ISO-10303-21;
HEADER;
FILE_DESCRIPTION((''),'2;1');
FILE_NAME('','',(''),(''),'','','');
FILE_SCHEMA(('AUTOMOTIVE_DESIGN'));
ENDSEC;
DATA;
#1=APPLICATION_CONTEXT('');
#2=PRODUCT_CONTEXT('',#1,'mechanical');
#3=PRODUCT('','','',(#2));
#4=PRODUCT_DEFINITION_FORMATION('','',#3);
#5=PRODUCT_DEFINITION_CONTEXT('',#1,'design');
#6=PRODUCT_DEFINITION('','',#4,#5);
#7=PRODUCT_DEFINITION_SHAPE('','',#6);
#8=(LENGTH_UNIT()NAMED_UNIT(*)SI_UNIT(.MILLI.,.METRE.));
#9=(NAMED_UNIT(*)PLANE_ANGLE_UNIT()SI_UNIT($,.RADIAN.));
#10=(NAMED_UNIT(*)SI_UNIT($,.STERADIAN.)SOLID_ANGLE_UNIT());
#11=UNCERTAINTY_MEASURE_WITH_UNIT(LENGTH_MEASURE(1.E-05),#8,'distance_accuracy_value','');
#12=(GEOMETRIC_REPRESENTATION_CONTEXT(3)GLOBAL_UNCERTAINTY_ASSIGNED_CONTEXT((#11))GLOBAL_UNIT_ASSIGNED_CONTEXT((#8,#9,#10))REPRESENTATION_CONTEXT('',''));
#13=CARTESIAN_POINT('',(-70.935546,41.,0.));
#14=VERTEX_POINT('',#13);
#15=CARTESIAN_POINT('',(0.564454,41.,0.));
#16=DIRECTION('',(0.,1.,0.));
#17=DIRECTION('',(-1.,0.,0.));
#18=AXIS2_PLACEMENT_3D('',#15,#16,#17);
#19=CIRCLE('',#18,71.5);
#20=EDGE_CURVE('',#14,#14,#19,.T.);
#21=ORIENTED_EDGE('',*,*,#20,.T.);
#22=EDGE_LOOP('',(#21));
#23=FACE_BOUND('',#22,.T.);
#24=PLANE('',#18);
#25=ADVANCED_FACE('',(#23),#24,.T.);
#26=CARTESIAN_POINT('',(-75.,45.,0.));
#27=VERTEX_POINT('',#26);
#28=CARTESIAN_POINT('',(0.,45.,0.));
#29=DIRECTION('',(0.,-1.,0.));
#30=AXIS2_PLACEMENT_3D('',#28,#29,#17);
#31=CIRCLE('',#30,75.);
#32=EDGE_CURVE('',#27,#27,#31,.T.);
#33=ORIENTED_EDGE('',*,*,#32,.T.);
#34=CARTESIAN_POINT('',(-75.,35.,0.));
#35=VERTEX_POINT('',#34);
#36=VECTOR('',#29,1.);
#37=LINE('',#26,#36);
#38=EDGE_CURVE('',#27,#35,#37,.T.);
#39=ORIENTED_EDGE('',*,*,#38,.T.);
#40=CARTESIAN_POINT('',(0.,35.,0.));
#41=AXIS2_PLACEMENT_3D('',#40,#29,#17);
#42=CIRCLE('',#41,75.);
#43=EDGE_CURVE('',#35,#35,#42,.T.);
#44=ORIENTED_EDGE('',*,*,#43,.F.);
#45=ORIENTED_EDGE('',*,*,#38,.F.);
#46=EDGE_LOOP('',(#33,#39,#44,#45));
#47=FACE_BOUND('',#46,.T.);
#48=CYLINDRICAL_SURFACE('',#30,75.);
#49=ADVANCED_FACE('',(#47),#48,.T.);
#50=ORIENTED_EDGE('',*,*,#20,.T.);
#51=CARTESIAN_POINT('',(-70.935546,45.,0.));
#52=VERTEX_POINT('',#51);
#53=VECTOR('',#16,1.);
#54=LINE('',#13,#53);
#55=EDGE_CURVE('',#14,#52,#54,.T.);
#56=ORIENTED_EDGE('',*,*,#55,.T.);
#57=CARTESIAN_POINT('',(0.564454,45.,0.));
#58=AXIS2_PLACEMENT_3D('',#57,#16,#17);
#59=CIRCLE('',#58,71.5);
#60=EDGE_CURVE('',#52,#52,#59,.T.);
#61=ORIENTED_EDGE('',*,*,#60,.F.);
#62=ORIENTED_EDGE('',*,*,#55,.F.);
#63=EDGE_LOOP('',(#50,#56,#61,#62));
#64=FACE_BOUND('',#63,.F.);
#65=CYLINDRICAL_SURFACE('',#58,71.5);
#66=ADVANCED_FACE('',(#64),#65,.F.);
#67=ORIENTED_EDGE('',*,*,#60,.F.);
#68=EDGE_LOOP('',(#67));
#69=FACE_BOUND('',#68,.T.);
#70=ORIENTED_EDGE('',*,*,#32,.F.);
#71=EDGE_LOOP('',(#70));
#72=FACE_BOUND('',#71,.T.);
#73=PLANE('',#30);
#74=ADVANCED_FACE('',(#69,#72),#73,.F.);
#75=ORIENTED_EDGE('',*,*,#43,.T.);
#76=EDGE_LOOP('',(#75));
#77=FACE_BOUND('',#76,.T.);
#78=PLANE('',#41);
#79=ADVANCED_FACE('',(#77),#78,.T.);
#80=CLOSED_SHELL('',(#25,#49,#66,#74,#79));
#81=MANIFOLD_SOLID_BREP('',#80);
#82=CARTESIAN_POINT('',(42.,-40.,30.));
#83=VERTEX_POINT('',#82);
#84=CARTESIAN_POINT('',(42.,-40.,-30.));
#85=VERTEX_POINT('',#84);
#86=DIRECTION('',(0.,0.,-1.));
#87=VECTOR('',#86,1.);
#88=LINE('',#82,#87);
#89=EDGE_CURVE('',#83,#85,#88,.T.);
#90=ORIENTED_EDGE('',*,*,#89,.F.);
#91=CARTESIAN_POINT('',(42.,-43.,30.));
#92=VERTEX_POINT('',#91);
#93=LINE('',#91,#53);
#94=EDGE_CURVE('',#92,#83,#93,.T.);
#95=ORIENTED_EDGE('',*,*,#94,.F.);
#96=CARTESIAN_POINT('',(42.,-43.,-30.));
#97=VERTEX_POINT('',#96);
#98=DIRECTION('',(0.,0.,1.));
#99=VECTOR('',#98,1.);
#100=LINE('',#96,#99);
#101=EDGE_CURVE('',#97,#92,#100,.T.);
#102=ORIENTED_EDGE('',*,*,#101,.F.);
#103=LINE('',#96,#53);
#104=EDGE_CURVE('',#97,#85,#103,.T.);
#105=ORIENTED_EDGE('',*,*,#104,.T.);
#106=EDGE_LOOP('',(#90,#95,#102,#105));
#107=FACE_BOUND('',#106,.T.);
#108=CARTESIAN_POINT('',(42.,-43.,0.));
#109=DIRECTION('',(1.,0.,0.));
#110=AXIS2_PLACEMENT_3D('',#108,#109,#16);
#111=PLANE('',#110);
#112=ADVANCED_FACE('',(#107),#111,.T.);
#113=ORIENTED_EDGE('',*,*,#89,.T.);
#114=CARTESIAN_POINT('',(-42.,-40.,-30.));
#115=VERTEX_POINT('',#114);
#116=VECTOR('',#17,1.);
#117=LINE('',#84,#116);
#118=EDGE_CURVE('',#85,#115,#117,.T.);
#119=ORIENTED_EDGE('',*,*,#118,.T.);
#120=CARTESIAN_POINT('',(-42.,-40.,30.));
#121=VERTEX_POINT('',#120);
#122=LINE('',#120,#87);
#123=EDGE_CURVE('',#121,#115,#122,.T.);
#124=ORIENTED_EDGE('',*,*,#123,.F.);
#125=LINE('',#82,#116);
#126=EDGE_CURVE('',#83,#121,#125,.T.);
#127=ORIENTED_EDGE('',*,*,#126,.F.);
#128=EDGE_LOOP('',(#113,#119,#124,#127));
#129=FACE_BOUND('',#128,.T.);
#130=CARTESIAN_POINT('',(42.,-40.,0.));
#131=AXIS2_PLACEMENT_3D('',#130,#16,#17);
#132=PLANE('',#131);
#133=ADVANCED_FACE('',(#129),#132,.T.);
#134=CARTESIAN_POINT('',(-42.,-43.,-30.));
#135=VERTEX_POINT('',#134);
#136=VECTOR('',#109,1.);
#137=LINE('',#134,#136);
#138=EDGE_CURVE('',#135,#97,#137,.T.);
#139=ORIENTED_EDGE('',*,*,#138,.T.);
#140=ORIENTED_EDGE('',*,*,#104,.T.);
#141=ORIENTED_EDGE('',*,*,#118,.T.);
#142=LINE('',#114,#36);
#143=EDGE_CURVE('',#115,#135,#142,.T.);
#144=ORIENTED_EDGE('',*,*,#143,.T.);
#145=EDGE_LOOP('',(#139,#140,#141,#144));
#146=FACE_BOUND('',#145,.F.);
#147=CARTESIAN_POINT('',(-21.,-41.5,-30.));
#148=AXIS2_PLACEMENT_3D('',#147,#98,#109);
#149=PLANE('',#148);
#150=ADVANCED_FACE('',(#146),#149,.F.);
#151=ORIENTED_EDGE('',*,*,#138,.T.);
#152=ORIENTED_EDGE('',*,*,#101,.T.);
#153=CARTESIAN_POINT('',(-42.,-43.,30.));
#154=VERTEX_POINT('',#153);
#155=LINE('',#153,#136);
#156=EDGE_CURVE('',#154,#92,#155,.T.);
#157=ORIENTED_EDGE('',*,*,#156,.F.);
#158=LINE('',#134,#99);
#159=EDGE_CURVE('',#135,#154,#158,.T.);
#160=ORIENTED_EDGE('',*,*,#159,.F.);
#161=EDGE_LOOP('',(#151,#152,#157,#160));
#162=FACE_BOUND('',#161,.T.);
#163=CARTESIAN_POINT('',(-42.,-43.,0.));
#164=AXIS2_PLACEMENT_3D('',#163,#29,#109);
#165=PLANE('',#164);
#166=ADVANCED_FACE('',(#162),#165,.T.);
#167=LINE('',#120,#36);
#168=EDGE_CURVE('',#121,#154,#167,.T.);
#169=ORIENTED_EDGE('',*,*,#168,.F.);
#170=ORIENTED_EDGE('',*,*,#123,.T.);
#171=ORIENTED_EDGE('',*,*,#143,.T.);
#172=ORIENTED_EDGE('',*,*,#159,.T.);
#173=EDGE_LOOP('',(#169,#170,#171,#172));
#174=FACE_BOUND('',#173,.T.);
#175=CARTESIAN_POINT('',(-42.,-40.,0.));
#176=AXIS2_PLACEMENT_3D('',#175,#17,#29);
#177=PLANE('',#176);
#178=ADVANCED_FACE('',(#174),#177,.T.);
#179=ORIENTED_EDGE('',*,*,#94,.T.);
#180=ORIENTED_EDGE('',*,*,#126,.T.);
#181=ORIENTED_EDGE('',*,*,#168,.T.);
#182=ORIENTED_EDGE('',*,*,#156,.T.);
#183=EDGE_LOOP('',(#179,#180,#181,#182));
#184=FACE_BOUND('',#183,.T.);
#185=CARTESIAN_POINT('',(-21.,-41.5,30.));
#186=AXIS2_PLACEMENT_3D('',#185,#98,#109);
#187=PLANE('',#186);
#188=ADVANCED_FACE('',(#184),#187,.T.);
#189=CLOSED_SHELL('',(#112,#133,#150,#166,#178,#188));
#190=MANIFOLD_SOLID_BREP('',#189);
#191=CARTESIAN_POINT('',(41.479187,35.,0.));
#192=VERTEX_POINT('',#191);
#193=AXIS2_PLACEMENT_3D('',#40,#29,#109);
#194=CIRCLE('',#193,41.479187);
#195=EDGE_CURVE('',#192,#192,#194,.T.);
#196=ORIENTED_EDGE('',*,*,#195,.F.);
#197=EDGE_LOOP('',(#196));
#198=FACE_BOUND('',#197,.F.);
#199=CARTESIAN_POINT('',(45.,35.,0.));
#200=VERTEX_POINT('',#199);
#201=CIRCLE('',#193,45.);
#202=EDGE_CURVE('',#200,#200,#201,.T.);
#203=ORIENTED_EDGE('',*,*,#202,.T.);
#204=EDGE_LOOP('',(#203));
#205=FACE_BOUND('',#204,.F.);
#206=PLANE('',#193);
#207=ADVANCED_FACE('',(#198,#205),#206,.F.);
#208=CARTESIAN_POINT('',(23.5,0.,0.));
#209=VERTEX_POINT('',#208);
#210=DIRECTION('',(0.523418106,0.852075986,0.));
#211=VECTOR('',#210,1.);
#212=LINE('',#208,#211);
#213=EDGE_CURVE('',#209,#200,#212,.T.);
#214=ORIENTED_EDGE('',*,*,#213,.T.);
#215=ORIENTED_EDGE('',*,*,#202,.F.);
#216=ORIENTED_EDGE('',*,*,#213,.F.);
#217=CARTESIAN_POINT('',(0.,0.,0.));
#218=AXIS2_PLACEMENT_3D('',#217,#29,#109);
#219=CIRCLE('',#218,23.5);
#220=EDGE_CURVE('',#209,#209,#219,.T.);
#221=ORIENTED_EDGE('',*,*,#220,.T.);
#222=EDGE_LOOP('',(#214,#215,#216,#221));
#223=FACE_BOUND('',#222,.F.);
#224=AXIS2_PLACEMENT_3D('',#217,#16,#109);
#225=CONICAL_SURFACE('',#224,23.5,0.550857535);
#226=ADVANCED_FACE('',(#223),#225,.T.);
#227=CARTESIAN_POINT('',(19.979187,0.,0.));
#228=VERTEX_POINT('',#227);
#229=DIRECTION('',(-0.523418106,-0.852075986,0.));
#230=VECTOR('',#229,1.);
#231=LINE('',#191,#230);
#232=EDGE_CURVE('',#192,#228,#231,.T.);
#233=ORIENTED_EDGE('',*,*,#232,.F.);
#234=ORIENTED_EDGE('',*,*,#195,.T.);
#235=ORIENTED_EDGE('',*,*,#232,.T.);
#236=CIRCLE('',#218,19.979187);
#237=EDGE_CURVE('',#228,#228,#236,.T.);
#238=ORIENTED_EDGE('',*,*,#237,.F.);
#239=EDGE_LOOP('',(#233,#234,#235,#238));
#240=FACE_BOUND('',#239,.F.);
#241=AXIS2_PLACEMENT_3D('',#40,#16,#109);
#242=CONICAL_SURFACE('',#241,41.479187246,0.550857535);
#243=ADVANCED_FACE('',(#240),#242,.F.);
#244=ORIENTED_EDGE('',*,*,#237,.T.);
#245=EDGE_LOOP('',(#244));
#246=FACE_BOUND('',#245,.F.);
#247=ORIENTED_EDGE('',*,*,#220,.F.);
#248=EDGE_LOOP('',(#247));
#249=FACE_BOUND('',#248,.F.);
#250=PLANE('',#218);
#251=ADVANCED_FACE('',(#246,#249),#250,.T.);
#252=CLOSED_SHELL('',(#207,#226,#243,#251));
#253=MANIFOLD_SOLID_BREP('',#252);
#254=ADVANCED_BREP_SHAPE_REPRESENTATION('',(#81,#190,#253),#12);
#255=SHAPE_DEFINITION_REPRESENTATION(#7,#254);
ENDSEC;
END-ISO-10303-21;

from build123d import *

# Parameters (mm, degrees)
F1_DEPTH = 30
F4_R     = 71.5
F5_DEPTH = 4


with BuildPart() as f1:
    # F0 (on Top) → F1 (new body, symmetric)
    with BuildSketch(Plane.XY):
        Polygon((0, -40), (-23.5, -40), (-42, -40), (-42, -43), (0, -43), align=None)
        Polygon((23.5, -40), (0, -40), (0, -43), (42, -43), (42, -40), align=None)
    extrude(amount=F1_DEPTH, both=True)


with BuildPart() as f2:
    # F0 (on Top) → F2 (revolve)
    with BuildSketch(Plane.XY):
        Polygon((41.479187246, 35), (19.979187246, 0), (23.5, 0), (45, 35), align=None)
    revolve(axis=Axis((0, 17.5, 0), (0, -1, 0)))


with BuildPart() as f3:
    # F0 (on Top) → F3 (revolve)
    with BuildSketch(Plane.XY):
        Polygon((-75, 35), (-45, 35), (0, 35), (0, 45), (-75, 45), align=None)
    revolve(axis=Axis((0, 40, 0), (0, -1, 0)))

    # F4 (on face) → F5 (cut, symmetric)
    with BuildSketch(Plane(origin=(0, 45, 0), x_dir=(-1, 0, 0), z_dir=(0, 1, 0))):
        with Locations((-0.5644535995, 0)):
            Circle(F4_R)
    extrude(amount=F5_DEPTH, both=True, mode=Mode.SUBTRACT)


solid = Compound([f1.part, f2.part, f3.part])
